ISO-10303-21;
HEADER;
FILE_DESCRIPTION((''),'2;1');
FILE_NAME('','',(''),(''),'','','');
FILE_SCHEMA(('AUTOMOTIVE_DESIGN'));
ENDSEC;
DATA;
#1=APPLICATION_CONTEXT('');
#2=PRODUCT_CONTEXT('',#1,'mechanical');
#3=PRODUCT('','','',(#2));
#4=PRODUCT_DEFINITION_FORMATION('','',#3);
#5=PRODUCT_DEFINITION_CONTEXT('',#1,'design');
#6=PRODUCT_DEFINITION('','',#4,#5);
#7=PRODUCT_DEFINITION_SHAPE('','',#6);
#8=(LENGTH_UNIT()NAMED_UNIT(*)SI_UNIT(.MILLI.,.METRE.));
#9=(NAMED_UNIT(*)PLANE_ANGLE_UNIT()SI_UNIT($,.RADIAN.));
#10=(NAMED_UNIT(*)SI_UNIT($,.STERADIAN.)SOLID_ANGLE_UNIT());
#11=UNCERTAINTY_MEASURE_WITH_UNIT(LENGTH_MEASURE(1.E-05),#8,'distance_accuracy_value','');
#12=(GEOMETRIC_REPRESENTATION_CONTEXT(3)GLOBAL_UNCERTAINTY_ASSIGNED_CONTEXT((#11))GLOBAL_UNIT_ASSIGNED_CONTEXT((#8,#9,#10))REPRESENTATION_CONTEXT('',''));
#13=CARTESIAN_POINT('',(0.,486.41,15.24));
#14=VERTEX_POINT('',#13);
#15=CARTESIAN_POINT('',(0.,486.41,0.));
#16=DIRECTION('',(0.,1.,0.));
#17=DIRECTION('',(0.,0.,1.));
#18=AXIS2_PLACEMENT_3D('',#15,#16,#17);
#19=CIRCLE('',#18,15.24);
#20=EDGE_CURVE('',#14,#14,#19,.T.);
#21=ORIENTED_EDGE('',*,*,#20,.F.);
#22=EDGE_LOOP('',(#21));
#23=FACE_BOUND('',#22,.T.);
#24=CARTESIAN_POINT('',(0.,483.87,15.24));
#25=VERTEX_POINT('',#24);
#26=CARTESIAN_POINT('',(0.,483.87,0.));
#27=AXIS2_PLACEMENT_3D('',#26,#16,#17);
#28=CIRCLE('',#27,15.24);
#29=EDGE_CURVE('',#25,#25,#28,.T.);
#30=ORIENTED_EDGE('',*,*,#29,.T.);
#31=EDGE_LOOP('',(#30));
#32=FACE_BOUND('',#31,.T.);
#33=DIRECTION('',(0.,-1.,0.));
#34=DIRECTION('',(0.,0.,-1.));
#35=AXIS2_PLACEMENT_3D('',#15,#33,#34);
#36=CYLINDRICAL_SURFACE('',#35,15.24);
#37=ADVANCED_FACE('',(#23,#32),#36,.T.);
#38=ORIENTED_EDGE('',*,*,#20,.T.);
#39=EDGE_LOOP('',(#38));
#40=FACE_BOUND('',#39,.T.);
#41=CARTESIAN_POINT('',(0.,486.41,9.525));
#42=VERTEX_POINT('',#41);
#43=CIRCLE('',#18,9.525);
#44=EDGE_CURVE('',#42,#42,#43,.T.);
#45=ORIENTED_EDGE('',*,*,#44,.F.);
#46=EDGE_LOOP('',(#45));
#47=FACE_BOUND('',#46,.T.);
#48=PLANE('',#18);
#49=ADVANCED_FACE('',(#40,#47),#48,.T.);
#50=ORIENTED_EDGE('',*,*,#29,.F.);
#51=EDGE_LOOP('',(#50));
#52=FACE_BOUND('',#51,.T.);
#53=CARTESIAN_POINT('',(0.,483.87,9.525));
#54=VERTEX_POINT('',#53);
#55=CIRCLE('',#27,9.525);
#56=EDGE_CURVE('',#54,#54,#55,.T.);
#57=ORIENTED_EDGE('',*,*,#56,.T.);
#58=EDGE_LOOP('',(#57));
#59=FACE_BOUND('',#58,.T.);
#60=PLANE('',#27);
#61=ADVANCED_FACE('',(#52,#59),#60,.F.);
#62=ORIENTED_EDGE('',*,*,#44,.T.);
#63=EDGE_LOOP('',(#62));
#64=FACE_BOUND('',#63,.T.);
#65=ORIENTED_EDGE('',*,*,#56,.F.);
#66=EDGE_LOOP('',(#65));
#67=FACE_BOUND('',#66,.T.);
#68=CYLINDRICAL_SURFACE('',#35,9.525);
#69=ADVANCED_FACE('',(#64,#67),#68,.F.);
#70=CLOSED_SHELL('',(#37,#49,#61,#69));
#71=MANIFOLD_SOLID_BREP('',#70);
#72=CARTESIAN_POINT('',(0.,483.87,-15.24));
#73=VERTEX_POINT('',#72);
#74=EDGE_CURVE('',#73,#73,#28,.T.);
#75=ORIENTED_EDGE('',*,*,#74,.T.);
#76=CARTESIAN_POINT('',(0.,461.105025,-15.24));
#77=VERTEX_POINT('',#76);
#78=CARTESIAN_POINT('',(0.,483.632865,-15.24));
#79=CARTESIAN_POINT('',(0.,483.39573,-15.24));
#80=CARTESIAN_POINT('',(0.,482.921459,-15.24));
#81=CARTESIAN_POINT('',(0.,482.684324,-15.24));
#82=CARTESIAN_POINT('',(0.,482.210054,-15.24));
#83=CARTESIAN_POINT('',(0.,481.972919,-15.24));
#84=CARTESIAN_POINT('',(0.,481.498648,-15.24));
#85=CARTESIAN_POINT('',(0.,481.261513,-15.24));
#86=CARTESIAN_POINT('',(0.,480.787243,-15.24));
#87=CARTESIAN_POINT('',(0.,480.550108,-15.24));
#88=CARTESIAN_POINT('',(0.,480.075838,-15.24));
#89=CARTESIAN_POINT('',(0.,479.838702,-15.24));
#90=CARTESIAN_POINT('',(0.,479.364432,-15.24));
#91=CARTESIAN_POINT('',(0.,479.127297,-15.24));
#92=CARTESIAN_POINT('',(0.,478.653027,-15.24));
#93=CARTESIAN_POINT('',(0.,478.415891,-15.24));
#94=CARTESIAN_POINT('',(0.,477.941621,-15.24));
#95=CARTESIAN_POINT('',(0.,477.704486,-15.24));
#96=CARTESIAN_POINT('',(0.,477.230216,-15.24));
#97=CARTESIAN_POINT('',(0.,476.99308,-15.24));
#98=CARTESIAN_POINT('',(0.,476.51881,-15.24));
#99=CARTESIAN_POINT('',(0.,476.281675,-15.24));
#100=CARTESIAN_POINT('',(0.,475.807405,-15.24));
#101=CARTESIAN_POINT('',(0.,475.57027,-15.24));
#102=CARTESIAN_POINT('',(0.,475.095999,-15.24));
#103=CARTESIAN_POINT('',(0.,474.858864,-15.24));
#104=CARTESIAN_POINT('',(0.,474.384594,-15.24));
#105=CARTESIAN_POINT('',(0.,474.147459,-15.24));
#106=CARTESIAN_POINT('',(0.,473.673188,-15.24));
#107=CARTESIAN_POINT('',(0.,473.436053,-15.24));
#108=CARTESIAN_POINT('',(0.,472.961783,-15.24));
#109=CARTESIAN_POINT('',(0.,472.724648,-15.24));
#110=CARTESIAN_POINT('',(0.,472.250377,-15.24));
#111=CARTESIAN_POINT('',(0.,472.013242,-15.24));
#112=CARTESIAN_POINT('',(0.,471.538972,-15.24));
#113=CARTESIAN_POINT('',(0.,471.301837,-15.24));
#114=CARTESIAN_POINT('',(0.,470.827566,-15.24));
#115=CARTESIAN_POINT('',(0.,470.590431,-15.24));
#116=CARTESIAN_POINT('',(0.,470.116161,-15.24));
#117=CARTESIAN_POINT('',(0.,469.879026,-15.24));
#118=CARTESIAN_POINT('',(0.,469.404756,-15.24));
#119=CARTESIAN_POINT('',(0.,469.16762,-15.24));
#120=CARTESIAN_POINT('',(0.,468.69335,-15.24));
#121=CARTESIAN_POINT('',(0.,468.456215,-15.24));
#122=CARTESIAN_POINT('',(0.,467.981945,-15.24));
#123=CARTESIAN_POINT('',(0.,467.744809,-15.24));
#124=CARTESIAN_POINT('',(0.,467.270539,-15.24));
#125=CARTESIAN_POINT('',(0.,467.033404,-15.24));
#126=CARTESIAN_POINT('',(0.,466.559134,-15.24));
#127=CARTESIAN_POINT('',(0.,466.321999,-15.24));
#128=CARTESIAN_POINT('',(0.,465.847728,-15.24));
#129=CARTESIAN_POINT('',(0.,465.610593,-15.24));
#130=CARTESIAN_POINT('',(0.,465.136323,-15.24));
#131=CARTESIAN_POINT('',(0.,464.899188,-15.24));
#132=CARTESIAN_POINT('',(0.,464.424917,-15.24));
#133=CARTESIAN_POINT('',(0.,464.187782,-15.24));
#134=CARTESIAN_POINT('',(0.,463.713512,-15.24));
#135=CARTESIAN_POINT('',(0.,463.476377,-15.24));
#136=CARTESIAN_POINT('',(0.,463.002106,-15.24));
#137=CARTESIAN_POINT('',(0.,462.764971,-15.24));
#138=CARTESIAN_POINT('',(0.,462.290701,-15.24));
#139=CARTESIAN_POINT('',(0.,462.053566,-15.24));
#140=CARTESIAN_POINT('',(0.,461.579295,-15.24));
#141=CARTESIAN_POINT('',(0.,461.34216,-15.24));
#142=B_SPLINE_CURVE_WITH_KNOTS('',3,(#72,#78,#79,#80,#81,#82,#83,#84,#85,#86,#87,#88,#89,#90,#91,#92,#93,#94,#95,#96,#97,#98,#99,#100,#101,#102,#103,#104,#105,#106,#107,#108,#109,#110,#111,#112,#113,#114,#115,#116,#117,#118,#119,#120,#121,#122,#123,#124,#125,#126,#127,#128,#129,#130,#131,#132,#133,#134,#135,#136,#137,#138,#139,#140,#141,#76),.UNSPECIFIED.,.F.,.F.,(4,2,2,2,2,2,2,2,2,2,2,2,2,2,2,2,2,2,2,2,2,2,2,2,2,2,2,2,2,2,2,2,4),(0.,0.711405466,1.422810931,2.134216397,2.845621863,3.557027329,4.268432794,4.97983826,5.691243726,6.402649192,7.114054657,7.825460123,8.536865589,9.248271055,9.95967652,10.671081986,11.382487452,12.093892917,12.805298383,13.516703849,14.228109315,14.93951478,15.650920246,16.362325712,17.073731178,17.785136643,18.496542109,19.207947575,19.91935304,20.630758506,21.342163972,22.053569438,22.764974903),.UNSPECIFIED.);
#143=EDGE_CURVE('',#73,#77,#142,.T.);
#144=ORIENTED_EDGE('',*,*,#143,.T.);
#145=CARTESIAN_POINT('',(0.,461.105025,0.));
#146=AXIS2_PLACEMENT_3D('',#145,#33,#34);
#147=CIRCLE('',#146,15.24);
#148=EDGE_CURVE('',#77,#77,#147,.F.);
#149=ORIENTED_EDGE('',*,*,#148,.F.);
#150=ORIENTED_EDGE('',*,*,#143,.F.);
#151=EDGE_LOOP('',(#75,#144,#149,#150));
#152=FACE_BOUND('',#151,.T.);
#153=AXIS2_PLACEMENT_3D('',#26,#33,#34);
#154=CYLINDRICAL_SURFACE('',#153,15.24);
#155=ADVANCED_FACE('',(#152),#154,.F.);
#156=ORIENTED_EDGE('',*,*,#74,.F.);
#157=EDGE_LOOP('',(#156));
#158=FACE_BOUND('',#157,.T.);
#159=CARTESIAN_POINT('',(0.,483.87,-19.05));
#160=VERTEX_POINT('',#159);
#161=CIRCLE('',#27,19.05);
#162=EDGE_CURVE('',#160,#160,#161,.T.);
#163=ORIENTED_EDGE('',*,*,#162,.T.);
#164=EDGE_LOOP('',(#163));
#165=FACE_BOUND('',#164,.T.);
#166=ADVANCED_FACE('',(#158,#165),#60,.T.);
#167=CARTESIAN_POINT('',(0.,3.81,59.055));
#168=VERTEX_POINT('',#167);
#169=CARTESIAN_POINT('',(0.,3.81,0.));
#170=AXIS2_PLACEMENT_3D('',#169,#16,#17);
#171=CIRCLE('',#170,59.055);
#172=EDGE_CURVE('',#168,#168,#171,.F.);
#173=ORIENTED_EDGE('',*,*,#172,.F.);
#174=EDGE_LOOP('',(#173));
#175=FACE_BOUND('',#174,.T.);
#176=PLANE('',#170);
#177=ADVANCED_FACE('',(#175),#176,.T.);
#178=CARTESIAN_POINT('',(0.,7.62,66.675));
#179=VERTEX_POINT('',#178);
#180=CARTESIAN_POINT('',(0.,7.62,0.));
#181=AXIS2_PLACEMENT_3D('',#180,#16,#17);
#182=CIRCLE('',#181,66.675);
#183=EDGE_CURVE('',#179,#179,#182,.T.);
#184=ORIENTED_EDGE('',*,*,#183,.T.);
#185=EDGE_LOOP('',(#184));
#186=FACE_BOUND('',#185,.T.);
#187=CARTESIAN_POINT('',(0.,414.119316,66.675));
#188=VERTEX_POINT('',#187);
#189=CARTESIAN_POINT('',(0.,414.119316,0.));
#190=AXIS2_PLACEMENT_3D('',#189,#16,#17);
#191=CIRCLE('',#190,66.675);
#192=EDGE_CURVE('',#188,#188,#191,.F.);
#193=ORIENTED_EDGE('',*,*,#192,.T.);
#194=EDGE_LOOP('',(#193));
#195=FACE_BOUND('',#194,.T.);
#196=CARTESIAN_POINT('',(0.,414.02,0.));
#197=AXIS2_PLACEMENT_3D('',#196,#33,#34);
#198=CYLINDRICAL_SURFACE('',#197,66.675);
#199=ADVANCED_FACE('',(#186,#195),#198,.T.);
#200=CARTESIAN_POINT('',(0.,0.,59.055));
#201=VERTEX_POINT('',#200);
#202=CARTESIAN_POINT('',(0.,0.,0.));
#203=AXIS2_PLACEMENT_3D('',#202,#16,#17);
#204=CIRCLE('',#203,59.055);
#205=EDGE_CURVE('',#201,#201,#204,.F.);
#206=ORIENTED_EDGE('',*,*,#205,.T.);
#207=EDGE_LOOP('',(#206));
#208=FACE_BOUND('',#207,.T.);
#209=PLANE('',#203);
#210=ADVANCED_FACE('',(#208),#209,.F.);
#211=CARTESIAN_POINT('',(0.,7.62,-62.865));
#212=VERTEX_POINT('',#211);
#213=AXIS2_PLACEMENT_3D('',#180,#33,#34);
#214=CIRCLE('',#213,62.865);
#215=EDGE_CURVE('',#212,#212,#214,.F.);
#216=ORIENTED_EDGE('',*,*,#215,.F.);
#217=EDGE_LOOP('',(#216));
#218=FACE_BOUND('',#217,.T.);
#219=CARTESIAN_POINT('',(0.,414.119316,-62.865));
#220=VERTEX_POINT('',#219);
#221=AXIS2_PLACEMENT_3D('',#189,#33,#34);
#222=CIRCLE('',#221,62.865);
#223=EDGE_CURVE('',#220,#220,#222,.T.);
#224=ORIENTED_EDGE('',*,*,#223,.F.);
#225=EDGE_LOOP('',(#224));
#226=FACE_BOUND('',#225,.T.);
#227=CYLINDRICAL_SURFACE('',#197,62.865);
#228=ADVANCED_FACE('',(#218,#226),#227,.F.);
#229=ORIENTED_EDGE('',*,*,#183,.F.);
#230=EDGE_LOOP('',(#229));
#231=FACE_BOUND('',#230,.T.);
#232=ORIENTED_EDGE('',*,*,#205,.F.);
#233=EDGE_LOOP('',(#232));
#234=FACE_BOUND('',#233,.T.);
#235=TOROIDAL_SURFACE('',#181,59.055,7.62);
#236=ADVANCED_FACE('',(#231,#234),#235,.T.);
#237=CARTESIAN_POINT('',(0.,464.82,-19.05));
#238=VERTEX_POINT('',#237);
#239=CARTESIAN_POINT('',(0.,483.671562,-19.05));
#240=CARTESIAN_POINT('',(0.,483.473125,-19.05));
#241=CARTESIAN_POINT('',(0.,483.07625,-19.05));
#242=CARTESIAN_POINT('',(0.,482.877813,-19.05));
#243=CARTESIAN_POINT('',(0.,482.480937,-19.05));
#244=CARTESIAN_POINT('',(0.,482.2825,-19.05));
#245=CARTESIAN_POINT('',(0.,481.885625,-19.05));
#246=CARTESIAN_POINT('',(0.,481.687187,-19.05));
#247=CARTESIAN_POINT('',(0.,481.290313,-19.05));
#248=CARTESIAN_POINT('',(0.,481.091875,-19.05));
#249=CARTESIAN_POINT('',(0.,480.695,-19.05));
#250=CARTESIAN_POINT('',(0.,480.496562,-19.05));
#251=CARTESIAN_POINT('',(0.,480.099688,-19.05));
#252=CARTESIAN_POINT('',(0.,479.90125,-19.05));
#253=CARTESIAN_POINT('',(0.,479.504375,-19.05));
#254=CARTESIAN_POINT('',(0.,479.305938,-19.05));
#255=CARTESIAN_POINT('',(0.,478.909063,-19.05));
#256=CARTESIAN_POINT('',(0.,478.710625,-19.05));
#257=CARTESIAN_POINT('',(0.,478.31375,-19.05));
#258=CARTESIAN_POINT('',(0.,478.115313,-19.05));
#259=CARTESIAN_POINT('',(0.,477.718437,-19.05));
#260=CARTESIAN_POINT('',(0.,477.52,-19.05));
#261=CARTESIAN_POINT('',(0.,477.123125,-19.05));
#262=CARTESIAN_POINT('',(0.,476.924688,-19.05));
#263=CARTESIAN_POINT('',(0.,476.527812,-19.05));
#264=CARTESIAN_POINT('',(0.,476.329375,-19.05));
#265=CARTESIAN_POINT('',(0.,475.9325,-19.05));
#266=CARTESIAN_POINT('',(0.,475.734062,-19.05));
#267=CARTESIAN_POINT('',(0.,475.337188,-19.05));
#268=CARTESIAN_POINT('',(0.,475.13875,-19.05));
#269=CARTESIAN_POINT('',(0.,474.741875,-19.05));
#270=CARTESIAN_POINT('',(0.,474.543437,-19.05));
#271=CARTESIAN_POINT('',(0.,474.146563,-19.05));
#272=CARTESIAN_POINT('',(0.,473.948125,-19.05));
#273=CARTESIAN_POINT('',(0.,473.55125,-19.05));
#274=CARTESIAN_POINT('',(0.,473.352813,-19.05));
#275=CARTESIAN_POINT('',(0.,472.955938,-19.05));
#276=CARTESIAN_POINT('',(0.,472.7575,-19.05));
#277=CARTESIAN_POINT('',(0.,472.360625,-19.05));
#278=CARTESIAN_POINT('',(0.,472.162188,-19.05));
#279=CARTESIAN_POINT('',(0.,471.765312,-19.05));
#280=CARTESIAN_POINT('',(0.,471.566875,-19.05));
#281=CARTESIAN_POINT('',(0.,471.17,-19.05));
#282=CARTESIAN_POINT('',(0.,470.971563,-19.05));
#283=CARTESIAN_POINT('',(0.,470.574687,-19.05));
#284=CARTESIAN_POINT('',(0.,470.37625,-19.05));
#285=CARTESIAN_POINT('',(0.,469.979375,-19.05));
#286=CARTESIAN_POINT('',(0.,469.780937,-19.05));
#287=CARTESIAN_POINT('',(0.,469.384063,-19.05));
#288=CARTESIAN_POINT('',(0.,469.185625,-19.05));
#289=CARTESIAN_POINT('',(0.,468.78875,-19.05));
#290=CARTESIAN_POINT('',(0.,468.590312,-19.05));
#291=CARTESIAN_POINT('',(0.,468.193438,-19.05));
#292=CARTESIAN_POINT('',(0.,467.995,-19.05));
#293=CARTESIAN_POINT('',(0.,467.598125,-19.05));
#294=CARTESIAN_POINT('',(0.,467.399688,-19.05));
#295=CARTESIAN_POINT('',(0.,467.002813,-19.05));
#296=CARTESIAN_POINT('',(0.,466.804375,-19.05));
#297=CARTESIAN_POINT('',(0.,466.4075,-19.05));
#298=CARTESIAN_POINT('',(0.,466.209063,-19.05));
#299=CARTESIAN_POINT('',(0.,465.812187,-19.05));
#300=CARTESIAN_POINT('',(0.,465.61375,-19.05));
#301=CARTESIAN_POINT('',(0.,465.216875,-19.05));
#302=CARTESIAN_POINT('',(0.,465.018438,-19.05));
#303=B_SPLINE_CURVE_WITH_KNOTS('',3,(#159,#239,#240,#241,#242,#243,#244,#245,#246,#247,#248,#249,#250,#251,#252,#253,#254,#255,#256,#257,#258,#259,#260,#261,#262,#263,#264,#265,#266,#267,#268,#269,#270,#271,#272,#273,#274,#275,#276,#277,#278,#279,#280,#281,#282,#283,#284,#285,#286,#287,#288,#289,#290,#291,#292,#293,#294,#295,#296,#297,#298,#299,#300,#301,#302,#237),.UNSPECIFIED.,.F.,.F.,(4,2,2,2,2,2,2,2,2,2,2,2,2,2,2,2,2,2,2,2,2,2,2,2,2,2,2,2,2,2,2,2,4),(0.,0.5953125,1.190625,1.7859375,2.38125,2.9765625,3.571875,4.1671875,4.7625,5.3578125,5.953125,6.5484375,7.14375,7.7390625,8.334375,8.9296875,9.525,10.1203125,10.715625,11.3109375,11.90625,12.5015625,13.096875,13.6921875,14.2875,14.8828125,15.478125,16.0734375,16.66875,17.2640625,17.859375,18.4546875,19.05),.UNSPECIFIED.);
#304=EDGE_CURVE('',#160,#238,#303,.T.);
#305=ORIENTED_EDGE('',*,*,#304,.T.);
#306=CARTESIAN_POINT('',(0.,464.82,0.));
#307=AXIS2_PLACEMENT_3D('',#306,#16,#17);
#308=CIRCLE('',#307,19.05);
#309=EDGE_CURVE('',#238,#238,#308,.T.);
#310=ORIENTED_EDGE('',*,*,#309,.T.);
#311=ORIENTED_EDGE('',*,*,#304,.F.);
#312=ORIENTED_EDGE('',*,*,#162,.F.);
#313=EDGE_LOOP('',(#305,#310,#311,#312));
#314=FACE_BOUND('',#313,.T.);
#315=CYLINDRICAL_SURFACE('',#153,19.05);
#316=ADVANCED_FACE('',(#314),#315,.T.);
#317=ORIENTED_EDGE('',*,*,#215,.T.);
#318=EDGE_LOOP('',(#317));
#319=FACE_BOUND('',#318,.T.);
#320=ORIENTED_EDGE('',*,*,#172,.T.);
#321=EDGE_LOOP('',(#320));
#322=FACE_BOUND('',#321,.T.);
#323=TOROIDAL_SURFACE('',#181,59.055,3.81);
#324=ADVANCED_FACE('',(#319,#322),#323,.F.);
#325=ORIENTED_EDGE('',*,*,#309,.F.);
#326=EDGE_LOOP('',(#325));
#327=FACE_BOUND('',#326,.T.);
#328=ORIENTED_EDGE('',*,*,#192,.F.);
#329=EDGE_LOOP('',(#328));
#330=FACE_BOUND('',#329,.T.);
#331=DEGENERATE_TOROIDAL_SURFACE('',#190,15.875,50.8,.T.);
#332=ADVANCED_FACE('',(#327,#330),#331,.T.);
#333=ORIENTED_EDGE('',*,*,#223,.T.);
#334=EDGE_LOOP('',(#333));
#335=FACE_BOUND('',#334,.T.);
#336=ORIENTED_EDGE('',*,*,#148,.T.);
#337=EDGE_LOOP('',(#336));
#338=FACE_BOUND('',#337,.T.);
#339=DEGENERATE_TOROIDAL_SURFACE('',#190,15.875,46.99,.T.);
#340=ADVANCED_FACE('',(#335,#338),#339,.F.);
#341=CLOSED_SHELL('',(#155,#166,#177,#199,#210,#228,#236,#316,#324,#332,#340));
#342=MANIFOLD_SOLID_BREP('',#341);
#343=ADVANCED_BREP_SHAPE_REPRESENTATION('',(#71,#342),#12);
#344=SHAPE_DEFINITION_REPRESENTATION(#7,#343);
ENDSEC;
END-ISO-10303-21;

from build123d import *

# Parameters (mm, degrees)
SKETCH1_R           = 66.675
BOSS_EXTRUDE1_DEPTH = 414.02
SKETCH2_R           = 66.675
BOSS_EXTRUDE2_DEPTH = 50.8
SKETCH3_R           = 19.05
BOSS_EXTRUDE3_DEPTH = 19.05
FILLET1_R           = 50.8
FILLET2_R           = 7.62
SKETCH4_R           = 15.24
SKETCH4_R_2         = 9.525
BOSS_EXTRUDE4_DEPTH = 2.54


# Read off the part's stored shape, not the designer's step: Shell2
with BuildPart() as part:
    # Sketch1 → Boss-Extrude1 (new body)
    with BuildSketch(Plane(origin=(0, 0, 0), x_dir=(1, 0, 0), z_dir=(0, 1, 0))):
        with Locations(Location((0, 0, 0), (0, 0, 270))):
            Circle(SKETCH1_R)
    extrude(amount=BOSS_EXTRUDE1_DEPTH)

    # Sketch2 → Boss-Extrude2 (add)
    with BuildSketch(Plane(origin=(0, 414.02, 0), x_dir=(1, 0, 0), z_dir=(0, 1, 0))):
        with Locations(Location((0, 0, 0), (0, 0, 270))):
            Circle(SKETCH2_R)
    extrude(amount=BOSS_EXTRUDE2_DEPTH)

    # Sketch3 → Boss-Extrude3 (add)
    with BuildSketch(Plane(origin=(0, 464.82, 0), x_dir=(1, 0, 0), z_dir=(0, 1, 0))):
        with Locations(Location((0, 0, 0), (0, 0, 90))):
            Circle(SKETCH3_R)
    extrude(amount=BOSS_EXTRUDE3_DEPTH)

    # Fillet1
    # the kernel refuses this fillet: 50.8 mm, written as the material it takes off along each edge
    with BuildSketch(Plane(origin=(0, 464.82, 0), x_dir=(0, 0, 1), z_dir=(-1, 0, 0))) as fillet1_piece_1:
        with BuildLine():
            CenterArc((15.875, -50.700684167), FILLET1_R, 0, 86.416678302)
            Line((19.05, 0), (19.1135, 1.014013683))
            ThreePointArc((19.1135, 1.014013683), (42.8625, 1.016), (66.675, 1.016))
            Line((66.675, 1.016), (67.691, 0))
            Line((67.691, 0), (67.691, -50.700684167))
            Line((67.691, -50.700684167), (66.675, -50.700684167))
        make_face()
    revolve(axis=Axis((0, 464.82, 0), (0, 1, 0)), mode=Mode.SUBTRACT)

    # Fillet2
    fillet2_edges = [part.edges().sort_by_distance(p)[0] for p in [
        (0, 0, -66.675),
    ]]
    fillet(fillet2_edges, radius=FILLET2_R)

    # Shell2 outline → Shell2 (revolve, cut)
    with BuildSketch(Plane.XY):
        with BuildLine():
            Line((62.865, 7.62), (62.865, 414.119315833))
            ThreePointArc((62.865, 414.119315833), (48.876677609, 447.570016498), (15.24, 461.105025097))
            Line((15.24, 461.105025097), (15.24, 483.87))
            Line((15.24, 483.87), (0, 483.87))
            Line((0, 483.87), (0, 3.81))
            Line((0, 3.81), (59.055, 3.81))
            ThreePointArc((59.055, 3.81), (61.749076836, 4.925923164), (62.865, 7.62))
        make_face()
    revolve(axis=Axis((0, 0, 0), (0, 1, 0)), mode=Mode.SUBTRACT)


with BuildPart() as body_2:
    # Sketch4 → Boss-Extrude4 (new body)
    with BuildSketch(Plane(origin=(0, 483.87, 0), x_dir=(1, 0, 0), z_dir=(0, 1, 0))):
        with Locations(Location((0, 0, 0), (0, 0, 270))):
            Circle(SKETCH4_R)
        with Locations(Location((0, 0, 0), (0, 0, 270))):
            Circle(SKETCH4_R_2, mode=Mode.SUBTRACT)
    extrude(amount=BOSS_EXTRUDE4_DEPTH)


solid = Compound([part.part, body_2.part])
